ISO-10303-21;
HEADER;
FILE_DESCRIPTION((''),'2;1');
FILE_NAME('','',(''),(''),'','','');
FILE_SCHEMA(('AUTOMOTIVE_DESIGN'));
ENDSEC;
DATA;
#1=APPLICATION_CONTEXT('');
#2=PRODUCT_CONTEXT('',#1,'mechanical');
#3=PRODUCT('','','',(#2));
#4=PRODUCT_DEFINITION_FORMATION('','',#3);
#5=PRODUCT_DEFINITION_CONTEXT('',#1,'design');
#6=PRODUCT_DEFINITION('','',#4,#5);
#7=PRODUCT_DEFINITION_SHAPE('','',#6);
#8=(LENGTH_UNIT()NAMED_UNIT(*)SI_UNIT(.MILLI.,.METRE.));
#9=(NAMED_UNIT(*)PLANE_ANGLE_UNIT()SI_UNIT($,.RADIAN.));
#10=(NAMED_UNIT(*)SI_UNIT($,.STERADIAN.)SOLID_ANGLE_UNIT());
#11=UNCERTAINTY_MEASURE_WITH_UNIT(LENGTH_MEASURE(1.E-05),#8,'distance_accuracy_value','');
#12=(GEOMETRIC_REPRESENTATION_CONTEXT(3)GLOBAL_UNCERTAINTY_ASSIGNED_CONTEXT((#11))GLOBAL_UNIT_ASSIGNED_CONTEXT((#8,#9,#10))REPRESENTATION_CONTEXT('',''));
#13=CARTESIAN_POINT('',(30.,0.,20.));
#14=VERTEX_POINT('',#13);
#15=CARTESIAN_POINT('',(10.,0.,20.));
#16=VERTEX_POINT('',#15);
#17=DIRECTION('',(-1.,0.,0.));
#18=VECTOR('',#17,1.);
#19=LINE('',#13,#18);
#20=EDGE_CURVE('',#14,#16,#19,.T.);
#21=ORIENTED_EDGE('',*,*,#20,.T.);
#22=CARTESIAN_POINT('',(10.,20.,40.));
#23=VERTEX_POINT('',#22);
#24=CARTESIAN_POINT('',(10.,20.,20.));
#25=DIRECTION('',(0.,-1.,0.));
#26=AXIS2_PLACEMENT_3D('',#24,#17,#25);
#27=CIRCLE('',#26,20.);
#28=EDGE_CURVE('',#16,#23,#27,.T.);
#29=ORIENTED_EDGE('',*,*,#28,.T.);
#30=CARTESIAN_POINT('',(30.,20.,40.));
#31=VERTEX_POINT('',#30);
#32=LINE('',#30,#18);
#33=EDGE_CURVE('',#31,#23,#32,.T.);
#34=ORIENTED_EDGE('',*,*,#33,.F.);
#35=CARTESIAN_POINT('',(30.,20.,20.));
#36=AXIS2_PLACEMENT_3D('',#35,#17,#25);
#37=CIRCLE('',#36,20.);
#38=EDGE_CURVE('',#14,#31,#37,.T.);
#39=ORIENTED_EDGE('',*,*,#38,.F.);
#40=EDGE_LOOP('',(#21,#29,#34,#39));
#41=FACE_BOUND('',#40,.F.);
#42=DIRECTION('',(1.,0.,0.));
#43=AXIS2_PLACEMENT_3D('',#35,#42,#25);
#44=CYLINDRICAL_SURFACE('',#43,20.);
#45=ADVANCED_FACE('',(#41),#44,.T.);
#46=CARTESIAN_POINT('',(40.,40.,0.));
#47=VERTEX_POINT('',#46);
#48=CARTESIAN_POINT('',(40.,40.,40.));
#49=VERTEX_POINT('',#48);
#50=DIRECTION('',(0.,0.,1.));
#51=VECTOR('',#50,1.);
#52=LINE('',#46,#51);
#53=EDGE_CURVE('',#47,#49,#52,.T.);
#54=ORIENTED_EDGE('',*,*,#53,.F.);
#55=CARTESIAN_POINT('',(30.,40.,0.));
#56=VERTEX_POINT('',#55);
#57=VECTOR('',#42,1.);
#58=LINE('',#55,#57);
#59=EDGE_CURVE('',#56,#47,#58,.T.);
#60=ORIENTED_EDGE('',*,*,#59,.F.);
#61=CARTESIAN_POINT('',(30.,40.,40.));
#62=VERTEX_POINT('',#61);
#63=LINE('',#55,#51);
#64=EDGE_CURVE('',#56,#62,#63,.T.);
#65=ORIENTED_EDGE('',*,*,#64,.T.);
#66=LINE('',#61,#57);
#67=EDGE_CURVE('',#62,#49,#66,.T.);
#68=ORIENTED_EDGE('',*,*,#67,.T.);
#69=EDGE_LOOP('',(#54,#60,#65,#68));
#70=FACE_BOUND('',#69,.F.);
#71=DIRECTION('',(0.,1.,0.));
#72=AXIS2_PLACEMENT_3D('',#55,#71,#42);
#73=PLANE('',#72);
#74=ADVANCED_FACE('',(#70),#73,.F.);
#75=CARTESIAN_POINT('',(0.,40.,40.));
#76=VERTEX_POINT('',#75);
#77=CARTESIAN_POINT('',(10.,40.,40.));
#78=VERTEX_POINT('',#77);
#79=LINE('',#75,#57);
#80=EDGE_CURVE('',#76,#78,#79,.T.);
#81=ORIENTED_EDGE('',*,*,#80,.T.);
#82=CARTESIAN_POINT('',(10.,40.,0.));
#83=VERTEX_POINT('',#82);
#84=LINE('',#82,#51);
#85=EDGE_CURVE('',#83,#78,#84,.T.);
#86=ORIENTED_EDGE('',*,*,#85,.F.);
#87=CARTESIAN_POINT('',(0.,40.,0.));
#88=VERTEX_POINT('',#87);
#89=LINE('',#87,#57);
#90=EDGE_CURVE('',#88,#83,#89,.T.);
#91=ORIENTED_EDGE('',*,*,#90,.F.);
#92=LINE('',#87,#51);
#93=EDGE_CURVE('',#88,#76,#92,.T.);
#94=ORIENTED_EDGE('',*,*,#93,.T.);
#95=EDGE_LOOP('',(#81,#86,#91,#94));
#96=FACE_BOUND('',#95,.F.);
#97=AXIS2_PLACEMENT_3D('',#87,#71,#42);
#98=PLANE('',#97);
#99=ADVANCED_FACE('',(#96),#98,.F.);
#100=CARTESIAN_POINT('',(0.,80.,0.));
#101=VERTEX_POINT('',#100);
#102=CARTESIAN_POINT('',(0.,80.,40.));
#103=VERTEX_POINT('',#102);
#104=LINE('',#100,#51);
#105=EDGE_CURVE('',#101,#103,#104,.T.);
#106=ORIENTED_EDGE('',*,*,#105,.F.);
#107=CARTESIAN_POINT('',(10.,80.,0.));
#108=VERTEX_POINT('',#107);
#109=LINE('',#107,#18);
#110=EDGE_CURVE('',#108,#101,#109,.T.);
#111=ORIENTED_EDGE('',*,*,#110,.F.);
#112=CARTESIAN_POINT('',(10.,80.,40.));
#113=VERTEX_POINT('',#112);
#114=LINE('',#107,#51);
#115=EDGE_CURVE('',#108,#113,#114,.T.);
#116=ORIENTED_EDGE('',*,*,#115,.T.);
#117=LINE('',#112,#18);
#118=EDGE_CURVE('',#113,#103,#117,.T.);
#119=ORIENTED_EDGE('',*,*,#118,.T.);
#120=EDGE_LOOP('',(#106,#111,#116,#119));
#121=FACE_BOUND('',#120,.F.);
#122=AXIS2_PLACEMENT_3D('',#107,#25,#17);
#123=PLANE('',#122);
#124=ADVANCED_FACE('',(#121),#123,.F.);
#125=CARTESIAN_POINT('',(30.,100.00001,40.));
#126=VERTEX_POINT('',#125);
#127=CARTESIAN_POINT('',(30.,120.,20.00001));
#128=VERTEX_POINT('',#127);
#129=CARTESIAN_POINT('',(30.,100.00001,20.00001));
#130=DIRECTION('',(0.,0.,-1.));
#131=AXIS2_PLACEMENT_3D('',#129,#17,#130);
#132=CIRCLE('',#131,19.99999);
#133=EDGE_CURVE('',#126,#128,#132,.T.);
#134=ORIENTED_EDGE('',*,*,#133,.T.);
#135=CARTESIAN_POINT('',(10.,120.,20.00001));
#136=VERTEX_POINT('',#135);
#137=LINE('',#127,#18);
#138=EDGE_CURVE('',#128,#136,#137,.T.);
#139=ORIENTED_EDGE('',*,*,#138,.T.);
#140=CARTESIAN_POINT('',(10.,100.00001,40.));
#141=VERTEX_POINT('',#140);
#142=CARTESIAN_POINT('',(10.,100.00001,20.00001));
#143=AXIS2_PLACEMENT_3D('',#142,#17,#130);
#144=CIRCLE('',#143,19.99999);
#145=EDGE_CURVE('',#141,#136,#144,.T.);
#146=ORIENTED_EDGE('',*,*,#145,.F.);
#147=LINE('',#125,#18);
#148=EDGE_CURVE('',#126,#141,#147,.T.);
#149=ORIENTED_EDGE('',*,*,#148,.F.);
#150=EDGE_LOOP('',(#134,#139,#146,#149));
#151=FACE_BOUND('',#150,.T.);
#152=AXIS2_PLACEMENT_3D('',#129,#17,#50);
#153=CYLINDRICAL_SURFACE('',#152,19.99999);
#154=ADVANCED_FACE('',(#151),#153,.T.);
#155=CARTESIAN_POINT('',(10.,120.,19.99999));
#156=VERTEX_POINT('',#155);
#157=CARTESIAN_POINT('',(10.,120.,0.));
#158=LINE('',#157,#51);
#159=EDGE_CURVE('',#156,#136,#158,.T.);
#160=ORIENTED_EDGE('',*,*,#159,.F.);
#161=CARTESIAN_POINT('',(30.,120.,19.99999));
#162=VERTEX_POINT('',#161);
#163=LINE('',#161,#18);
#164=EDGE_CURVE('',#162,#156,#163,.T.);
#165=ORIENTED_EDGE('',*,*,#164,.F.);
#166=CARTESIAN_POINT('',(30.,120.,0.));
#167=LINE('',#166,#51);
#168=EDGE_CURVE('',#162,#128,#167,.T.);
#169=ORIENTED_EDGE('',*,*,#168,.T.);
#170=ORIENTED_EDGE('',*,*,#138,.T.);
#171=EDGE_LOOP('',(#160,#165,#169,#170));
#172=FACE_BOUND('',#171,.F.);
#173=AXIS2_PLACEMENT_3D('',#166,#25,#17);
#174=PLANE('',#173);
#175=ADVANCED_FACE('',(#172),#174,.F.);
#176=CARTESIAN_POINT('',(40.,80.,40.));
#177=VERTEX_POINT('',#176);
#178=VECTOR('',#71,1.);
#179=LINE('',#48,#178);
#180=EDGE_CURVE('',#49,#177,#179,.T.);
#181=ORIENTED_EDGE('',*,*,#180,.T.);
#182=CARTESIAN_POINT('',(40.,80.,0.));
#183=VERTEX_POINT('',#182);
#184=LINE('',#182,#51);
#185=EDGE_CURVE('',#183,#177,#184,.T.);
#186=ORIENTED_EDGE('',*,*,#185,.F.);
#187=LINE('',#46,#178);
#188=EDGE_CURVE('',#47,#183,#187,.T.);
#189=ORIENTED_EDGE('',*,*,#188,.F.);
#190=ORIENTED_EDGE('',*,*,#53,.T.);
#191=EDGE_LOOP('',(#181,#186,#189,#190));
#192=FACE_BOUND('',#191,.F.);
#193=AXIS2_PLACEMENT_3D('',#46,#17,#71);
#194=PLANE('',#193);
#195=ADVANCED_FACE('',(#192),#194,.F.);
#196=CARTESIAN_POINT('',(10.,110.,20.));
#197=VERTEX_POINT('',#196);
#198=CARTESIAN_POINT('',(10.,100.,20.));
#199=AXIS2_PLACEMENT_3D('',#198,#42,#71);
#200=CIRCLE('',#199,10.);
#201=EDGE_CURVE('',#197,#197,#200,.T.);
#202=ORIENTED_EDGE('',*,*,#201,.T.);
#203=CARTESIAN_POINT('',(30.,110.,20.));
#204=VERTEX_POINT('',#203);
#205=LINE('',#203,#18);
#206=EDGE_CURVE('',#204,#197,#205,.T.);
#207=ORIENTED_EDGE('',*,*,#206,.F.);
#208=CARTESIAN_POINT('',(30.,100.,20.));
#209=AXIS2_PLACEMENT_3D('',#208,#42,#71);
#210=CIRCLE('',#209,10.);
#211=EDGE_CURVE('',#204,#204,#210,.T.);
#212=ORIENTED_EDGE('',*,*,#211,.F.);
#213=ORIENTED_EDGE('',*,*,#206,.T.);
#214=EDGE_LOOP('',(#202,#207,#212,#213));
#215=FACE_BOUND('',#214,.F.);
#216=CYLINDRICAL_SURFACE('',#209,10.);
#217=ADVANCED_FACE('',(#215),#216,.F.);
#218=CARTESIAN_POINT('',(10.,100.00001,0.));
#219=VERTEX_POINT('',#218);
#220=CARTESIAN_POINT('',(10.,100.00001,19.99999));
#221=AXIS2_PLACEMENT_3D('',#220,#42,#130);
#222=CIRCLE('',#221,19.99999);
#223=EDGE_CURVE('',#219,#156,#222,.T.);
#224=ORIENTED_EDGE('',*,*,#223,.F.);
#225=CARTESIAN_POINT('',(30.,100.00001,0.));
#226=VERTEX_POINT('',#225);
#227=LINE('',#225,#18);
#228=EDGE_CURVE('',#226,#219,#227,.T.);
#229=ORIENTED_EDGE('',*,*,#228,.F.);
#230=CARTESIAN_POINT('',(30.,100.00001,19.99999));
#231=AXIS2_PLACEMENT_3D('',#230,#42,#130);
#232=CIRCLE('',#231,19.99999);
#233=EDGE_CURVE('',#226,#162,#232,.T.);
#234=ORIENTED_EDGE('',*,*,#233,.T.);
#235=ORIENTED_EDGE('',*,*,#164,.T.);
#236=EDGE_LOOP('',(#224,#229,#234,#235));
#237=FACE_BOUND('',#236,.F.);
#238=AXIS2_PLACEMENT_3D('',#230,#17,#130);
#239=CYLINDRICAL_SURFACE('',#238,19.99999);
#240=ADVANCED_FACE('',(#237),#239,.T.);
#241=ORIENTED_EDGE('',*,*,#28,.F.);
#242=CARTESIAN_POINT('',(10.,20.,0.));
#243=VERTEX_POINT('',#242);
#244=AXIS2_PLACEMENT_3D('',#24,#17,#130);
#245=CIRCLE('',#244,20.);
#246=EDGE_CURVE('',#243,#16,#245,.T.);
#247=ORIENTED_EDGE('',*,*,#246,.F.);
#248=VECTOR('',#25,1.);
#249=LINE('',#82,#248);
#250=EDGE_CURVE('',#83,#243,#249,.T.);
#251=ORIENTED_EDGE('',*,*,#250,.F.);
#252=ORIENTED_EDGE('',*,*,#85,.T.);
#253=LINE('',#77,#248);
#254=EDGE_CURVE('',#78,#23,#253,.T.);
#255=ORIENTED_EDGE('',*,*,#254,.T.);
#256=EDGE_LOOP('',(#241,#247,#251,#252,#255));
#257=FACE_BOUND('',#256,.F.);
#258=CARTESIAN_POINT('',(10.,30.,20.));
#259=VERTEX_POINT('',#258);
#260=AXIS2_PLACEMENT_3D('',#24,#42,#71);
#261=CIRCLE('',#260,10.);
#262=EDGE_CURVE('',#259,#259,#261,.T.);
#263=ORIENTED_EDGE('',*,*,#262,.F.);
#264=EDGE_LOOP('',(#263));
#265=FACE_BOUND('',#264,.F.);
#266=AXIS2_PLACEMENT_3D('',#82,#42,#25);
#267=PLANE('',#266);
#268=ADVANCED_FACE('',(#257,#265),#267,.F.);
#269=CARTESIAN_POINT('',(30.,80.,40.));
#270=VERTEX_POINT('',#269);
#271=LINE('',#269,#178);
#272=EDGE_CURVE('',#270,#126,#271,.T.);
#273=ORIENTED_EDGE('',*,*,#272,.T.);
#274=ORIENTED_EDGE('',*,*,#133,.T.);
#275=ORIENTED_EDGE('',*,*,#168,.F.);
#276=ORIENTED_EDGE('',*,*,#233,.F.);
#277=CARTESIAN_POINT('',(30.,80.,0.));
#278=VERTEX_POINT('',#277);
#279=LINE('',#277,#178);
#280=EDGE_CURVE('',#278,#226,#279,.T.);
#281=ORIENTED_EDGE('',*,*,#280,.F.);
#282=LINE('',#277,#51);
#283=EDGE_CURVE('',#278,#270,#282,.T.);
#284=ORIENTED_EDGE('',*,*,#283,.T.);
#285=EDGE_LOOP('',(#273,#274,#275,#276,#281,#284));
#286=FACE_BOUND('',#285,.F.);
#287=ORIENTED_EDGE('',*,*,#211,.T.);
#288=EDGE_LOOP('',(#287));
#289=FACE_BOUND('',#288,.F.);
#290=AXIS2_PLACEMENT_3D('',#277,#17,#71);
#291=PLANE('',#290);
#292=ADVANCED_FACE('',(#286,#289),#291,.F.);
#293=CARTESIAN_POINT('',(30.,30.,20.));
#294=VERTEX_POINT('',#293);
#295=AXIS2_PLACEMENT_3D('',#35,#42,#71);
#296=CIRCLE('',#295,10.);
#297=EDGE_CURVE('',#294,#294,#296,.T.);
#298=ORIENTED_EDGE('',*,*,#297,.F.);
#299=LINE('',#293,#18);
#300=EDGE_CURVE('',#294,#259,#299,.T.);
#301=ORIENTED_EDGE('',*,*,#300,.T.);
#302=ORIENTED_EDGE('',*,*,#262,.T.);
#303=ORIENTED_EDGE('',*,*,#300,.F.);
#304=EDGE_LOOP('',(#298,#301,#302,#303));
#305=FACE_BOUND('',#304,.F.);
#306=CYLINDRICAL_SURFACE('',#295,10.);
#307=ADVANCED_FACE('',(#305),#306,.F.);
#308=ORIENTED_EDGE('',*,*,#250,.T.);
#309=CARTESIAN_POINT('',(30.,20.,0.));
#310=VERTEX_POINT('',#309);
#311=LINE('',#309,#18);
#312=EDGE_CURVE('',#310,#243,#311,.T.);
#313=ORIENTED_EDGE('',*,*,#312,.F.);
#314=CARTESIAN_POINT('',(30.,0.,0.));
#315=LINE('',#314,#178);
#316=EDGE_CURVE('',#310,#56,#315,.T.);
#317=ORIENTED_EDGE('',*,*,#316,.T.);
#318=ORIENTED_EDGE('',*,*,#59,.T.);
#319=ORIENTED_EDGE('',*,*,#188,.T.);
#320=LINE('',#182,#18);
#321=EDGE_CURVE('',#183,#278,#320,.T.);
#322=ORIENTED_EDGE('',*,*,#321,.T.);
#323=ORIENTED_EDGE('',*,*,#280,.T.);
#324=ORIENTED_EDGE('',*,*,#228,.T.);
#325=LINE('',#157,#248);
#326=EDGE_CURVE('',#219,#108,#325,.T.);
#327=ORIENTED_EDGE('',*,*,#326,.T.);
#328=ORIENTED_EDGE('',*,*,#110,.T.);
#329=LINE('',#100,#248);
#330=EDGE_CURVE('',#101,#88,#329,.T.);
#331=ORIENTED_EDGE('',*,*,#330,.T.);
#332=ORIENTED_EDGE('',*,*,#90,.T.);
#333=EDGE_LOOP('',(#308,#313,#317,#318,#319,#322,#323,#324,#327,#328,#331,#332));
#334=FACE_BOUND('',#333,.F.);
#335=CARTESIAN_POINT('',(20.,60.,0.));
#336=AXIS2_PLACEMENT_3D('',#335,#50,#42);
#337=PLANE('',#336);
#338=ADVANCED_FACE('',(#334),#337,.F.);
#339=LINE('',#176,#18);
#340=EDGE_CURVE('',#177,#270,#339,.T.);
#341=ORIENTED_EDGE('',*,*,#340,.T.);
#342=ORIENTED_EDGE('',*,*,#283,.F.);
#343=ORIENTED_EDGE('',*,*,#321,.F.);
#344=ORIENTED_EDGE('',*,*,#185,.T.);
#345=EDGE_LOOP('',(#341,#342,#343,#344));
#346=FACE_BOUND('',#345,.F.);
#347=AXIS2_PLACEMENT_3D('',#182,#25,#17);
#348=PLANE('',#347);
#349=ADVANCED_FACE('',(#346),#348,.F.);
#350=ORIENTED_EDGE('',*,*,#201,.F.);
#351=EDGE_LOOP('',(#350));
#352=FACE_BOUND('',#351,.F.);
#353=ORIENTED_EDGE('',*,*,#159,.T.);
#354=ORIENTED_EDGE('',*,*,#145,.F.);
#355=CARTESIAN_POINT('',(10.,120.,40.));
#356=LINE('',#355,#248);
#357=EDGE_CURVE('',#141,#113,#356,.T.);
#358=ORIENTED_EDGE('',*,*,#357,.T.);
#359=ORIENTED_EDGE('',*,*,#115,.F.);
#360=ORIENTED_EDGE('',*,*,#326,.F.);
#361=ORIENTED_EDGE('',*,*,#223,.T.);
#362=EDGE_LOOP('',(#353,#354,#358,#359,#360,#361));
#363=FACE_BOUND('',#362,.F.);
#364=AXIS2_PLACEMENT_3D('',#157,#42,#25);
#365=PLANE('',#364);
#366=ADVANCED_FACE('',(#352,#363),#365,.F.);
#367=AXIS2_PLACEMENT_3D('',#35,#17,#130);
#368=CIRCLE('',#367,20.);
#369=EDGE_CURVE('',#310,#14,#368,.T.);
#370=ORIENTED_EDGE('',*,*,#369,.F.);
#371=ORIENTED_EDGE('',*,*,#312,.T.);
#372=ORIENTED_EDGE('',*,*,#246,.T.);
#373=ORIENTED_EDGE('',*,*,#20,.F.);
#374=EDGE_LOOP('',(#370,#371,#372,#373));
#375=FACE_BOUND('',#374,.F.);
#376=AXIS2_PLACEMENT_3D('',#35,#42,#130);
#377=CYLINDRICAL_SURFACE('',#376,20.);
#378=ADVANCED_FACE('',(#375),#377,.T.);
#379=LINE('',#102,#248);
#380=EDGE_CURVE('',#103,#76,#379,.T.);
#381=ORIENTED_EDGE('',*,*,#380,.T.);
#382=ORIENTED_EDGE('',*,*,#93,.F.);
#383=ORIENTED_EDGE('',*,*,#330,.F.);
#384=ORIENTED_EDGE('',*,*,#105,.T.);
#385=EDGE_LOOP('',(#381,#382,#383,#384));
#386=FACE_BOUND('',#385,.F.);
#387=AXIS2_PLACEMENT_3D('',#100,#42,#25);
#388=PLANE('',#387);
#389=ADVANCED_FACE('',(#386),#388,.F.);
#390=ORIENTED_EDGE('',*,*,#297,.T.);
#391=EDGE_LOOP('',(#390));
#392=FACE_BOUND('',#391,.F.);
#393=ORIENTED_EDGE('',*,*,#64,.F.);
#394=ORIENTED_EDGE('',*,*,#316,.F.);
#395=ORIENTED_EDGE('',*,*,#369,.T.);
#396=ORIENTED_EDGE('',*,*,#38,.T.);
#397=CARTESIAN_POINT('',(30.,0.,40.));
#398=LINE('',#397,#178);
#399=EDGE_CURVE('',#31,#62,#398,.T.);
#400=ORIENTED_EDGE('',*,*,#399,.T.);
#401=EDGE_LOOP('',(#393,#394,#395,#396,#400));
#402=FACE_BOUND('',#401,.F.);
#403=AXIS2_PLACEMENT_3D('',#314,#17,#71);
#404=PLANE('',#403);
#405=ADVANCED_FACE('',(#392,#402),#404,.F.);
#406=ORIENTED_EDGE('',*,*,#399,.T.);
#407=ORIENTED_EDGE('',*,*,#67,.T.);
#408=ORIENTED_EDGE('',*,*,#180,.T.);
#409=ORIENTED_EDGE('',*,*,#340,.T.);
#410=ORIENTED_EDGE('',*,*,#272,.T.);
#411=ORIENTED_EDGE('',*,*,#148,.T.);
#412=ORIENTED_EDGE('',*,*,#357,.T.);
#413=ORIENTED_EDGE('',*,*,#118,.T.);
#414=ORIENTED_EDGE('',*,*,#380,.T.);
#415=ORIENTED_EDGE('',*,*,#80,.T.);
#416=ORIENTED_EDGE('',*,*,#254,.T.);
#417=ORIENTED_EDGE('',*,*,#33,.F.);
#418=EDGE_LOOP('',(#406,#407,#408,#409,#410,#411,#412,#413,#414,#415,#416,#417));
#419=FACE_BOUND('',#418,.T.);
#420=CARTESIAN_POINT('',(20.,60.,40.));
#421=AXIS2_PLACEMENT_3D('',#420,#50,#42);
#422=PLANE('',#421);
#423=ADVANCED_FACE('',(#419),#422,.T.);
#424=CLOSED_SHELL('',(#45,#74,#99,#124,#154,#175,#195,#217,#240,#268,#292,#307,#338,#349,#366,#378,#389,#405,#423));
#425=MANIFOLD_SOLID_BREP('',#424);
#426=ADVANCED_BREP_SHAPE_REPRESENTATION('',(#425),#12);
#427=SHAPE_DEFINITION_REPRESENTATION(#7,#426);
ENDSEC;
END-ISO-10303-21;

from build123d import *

# Parameters (mm, degrees)
F1_DEPTH = 40
F3_DEPTH = 20
F4_R     = 19.99999
F5_R     = 10
F6_DEPTH = 25


# Not quite as in the source:
# - a fillet or chamfer is up to 0.001 mm smaller than in the source, because OpenCascade refuses the exact size


with BuildPart() as f1:
    # F0 (on Top) → F1 (new body)
    with BuildSketch(Plane.XY):
        Polygon((10, 40), (10, 0), (30, 0), (30, 40), (40, 40), (40, 80), (30, 80), (30, 120), (10, 120), (10, 80), (0, 80), (0, 40), align=None)
    extrude(amount=F1_DEPTH)

    # F2 (on face) → F3 (cut)
    with BuildSketch(Plane.YZ.offset(30)):
        with BuildLine():
            ThreePointArc((20, 0), (5.8578643763, 5.8578643763), (0, 20))
            Line((0, 20), (0, 0))
            Line((0, 0), (20, 0))
        make_face()
        with BuildLine():
            ThreePointArc((0, 20), (5.8578643763, 34.1421356237), (20, 40))
            Line((20, 40), (0, 40))
            Line((0, 40), (0, 20))
        make_face()
    extrude(amount=-F3_DEPTH, mode=Mode.SUBTRACT)

    # F4 (radius 20 in the source; OpenCascade refuses exactly that, so slightly less here)
    f4_edges = [f1.edges().sort_by_distance(p)[0] for p in [
        (20, 120, 0),
        (20, 120, 40),
    ]]
    fillet(f4_edges, radius=F4_R)

    # F5 (on face) → F6 (cut)
    with BuildSketch(Plane.YZ.offset(30)):
        with Locations((100, 20)):
            Circle(F5_R)
        with Locations((20, 20)):
            Circle(F5_R)
    extrude(amount=-F6_DEPTH, mode=Mode.SUBTRACT)


solid = f1.part
